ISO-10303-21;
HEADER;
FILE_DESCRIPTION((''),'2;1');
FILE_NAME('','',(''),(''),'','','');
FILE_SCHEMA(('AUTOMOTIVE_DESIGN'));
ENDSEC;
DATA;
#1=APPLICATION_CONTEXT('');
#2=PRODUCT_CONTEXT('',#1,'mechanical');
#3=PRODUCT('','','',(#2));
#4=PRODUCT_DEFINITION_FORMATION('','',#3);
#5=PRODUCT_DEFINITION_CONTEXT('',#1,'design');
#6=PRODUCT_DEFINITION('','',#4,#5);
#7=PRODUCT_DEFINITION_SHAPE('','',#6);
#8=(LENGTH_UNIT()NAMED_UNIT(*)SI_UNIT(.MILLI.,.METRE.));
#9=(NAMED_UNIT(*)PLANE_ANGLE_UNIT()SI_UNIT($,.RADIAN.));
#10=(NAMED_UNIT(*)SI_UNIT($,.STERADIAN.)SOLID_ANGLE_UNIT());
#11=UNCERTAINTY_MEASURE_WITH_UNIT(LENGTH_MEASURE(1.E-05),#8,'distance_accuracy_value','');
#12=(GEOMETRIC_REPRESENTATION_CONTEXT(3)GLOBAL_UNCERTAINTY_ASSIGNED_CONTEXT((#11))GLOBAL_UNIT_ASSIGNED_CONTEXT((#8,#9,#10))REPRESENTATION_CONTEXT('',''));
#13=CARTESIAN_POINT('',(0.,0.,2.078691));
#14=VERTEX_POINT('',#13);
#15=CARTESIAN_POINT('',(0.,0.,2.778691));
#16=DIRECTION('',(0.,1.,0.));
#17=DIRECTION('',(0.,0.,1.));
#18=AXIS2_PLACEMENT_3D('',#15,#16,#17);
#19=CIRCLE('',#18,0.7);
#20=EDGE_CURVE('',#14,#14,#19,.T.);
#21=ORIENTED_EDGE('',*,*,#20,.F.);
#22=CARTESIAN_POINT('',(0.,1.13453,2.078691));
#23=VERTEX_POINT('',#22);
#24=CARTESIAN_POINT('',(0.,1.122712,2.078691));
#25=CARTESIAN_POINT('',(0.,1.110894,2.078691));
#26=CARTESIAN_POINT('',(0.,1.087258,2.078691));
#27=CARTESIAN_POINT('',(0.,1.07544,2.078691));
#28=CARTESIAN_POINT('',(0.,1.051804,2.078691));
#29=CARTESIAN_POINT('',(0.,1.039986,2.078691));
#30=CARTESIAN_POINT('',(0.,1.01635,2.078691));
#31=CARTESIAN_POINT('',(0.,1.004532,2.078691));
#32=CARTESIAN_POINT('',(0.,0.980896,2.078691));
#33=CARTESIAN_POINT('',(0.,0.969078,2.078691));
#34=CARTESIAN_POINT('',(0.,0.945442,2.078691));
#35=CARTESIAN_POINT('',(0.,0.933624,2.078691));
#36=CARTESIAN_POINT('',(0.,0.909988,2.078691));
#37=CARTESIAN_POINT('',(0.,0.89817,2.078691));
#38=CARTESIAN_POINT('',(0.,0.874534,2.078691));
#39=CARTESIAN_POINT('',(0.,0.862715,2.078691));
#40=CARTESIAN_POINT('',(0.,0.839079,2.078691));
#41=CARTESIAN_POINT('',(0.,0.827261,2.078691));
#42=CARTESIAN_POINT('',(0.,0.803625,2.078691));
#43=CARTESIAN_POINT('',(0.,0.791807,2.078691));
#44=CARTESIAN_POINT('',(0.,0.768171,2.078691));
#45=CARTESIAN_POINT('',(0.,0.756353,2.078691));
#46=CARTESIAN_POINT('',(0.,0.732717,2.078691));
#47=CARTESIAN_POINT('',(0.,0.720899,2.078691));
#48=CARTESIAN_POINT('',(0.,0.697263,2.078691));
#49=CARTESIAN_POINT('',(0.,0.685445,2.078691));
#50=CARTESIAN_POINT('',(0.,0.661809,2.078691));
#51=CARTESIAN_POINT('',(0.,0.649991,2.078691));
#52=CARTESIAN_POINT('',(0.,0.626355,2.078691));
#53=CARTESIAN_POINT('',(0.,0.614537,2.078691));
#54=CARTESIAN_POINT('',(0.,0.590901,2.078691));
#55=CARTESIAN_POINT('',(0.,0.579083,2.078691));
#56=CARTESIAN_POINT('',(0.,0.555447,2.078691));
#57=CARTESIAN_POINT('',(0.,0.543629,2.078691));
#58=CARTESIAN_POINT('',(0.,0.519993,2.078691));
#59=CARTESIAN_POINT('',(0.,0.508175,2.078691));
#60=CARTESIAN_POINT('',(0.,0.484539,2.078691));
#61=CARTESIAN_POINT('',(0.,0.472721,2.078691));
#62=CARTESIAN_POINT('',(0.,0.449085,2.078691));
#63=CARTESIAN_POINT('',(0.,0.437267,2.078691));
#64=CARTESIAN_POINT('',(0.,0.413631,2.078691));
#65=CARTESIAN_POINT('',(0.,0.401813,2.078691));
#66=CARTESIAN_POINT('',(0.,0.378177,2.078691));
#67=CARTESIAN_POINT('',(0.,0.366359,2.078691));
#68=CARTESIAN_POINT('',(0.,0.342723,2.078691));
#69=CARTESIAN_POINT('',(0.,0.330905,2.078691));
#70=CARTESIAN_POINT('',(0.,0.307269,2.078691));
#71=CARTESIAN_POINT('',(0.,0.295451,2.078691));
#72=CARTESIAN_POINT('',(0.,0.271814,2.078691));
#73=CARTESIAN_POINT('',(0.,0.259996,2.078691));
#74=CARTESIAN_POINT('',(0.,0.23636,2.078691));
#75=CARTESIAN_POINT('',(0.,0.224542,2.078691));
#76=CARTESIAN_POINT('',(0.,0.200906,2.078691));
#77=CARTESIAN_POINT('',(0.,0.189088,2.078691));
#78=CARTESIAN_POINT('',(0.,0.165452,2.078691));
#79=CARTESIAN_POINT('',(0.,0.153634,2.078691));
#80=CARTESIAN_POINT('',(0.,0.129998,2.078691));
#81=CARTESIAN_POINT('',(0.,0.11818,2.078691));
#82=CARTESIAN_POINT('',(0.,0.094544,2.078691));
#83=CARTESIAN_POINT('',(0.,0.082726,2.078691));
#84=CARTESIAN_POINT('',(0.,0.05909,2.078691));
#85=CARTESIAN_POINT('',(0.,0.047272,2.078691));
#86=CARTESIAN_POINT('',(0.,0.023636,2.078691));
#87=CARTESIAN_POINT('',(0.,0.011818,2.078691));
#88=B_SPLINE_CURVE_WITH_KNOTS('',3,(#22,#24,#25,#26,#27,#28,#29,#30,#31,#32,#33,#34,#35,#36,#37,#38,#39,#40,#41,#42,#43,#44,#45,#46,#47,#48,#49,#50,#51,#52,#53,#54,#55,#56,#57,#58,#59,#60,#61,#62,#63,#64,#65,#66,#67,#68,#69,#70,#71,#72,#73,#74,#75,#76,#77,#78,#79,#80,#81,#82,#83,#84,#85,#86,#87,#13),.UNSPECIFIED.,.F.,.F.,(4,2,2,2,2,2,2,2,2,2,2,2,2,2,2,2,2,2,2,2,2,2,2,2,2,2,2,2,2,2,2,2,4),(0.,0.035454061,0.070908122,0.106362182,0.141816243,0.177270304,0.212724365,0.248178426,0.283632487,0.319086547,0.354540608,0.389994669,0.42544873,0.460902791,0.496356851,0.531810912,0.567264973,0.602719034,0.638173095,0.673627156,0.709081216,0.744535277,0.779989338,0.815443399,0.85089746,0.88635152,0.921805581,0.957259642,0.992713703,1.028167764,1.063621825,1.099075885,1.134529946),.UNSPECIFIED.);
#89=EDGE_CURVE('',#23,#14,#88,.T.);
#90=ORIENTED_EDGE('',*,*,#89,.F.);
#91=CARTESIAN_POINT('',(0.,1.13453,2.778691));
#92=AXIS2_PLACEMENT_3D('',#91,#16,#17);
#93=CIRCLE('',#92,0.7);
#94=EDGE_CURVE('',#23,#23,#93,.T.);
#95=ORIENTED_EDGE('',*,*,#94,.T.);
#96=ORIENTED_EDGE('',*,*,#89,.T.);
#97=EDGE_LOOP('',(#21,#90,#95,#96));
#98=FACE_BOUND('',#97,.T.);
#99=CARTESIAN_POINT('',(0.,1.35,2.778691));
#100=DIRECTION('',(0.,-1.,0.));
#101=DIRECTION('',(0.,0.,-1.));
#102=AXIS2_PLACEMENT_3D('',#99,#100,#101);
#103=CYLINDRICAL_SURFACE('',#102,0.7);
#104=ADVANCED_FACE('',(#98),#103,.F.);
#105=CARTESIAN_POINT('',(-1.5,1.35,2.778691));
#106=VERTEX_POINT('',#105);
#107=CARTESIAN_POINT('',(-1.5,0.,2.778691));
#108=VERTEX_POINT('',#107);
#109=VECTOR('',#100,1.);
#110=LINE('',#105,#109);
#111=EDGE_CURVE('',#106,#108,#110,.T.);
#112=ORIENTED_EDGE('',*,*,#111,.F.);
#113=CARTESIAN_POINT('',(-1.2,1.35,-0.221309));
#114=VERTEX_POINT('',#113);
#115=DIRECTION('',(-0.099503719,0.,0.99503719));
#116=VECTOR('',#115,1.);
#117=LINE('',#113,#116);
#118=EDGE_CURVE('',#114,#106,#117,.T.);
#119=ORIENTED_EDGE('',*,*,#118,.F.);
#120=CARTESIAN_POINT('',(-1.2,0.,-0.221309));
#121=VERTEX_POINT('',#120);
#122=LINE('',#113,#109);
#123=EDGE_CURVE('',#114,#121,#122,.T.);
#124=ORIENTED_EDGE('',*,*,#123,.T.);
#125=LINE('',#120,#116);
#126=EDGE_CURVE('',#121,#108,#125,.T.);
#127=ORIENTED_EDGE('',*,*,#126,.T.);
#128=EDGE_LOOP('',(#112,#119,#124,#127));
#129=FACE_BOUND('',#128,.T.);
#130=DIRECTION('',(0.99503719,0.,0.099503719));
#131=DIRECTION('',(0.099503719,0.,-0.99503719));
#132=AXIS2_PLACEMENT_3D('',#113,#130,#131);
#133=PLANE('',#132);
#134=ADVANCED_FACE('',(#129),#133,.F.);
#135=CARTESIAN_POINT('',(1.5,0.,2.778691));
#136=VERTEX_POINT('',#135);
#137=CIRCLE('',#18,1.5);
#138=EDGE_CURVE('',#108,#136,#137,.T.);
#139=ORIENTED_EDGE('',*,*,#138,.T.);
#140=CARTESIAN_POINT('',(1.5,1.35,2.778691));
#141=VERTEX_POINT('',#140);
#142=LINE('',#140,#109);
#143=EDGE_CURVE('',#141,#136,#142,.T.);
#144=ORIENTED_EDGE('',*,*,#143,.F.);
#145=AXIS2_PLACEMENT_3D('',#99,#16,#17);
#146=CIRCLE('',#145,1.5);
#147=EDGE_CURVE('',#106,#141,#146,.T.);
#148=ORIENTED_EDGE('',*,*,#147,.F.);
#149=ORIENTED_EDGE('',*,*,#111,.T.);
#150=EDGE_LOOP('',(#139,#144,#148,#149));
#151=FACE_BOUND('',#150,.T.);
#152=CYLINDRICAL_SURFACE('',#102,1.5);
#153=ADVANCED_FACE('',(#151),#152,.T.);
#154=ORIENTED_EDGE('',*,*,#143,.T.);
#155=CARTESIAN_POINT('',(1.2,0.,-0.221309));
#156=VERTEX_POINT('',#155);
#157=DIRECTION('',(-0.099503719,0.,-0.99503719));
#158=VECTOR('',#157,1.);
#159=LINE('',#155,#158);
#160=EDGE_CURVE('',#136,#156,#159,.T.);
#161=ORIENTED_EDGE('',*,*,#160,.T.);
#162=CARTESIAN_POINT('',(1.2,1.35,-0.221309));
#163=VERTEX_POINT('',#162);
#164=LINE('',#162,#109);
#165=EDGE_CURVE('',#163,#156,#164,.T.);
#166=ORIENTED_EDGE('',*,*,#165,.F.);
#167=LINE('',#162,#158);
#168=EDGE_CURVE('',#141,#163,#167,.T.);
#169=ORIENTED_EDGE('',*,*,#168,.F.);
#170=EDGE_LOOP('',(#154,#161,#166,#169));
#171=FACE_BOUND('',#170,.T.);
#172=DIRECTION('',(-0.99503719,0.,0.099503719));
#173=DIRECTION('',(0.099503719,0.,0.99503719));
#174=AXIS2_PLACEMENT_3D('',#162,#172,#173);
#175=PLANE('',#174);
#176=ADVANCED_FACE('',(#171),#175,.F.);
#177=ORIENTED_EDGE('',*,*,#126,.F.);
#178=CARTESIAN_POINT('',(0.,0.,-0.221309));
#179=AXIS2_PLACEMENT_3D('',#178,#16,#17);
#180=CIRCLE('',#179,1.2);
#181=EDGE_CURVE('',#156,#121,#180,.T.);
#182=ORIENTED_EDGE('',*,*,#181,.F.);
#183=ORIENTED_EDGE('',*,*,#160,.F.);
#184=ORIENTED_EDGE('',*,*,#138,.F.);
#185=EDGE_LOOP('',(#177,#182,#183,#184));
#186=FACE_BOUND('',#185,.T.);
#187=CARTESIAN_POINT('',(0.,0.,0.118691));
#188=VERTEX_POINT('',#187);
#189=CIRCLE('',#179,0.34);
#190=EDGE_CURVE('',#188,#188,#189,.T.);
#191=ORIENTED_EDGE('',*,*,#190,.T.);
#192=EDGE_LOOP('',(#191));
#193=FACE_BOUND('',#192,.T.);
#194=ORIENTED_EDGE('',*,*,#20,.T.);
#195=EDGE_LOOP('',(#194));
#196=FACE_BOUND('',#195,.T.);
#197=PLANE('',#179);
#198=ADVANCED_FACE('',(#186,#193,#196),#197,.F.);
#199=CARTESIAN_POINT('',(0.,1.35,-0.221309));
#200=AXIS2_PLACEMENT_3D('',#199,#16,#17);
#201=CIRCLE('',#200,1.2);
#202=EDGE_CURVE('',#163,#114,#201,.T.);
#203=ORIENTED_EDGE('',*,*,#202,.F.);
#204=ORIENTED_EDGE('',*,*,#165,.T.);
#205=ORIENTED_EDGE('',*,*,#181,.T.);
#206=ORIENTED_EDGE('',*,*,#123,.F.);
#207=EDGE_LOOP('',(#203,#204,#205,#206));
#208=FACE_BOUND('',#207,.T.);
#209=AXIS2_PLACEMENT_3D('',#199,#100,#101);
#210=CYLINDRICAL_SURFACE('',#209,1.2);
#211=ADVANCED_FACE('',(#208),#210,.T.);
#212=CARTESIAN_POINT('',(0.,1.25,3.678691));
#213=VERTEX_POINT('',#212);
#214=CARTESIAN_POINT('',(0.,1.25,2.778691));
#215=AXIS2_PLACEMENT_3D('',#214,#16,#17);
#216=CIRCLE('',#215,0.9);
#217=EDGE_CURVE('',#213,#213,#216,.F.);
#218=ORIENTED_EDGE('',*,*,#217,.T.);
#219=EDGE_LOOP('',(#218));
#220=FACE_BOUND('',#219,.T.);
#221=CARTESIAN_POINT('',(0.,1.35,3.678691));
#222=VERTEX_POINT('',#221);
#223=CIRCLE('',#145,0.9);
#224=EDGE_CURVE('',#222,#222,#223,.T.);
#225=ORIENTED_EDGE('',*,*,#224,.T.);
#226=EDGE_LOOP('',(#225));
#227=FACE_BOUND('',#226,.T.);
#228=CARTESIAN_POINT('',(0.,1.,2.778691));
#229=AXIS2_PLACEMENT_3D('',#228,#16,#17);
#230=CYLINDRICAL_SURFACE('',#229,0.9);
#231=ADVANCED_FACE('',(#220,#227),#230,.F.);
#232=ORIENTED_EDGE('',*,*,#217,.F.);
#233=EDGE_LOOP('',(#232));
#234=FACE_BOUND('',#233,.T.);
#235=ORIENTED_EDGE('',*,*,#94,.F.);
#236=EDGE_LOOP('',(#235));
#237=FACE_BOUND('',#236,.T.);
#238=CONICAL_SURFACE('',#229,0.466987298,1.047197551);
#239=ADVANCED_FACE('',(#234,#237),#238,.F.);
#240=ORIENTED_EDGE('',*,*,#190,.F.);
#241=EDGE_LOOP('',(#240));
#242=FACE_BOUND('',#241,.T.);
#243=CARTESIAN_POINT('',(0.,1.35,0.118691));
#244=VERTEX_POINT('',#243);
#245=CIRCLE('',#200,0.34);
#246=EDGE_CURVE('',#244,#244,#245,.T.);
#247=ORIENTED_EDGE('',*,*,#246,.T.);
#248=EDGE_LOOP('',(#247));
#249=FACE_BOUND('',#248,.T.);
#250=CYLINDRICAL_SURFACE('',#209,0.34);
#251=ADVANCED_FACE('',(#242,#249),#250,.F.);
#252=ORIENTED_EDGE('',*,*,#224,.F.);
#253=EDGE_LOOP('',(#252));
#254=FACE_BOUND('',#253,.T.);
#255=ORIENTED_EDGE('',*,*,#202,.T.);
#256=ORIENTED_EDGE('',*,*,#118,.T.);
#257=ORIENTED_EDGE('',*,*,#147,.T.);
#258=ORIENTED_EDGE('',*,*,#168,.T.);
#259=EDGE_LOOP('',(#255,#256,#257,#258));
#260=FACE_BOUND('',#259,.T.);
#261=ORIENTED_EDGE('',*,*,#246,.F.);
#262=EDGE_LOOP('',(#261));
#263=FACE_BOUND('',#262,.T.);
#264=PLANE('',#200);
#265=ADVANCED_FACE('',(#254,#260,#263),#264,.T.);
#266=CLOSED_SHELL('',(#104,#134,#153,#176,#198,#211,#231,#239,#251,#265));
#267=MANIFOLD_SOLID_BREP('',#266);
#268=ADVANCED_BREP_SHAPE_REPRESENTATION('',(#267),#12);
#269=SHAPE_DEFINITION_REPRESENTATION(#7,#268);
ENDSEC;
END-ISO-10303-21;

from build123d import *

# Parameters (mm, degrees)
SKETCH1_R           = 0.7
SKETCH1_R_2         = 0.34
BOSS_EXTRUDE1_DEPTH = 1.35
SKETCH2_R           = 0.9
CUT_EXTRUDE3_DEPTH  = 0.35
CHAMFER1_SIZE       = 0.25
CHAMFER1_SIZE_2     = 0.433012702


with BuildPart() as part:
    # Sketch1 → Boss-Extrude1 (new body)
    with BuildSketch(Plane(origin=(0, 0, 0), x_dir=(1, 0, 0), z_dir=(0, 1, 0))):
        with BuildLine():
            Line((-1.2, 0.221308643), (-1.5, -2.778691357))
            ThreePointArc((-1.5, -2.778691357), (0, -4.278691357), (1.5, -2.778691357))
            Line((1.5, -2.778691357), (1.2, 0.221308643))
            ThreePointArc((1.2, 0.221308643), (0, 1.421308643), (-1.2, 0.221308643))
        make_face()
        with Locations(Location((0, -2.778691357, 0), (0, 0, 90))):
            Circle(SKETCH1_R, mode=Mode.SUBTRACT)
        with Locations(Location((0, 0.221308643, 0), (0, 0, 270))):
            Circle(SKETCH1_R_2, mode=Mode.SUBTRACT)
    extrude(amount=BOSS_EXTRUDE1_DEPTH)

    # Sketch2 → Cut-Extrude3 (cut)
    with BuildSketch(Plane(origin=(0, 1.35, 0), x_dir=(1, 0, 0), z_dir=(0, 1, 0))):
        with Locations(Location((0, -2.778691357, 0), (0, 0, 270))):
            Circle(SKETCH2_R)
    extrude(amount=-CUT_EXTRUDE3_DEPTH, mode=Mode.SUBTRACT)

    # Chamfer1
    # the kernel refuses this chamfer: 0.433012702, 0.25 mm, written as the material it adds along each edge
    with BuildSketch(Plane(origin=(0, 1, 2.778691357), x_dir=(0, 0, 1), z_dir=(-1, 0, 0))) as chamfer1_piece_1_section:
        Polygon((0.9, CHAMFER1_SIZE), (0.9 - CHAMFER1_SIZE_2, 0), (0.9, 0), align=None)
    chamfer1_piece_1 = revolve(axis=Axis((0, 1, 2.778691357), (0, 1, 0)), mode=Mode.PRIVATE)
    chamfer1_piece_1 = chamfer1_piece_1 - Plane(origin=(0, 1.191367734, 2.778691357), x_dir=(0, 0, -1), z_dir=(0, -1, 0)) * Cylinder(0.7, 4, mode=Mode.PRIVATE)
    add(chamfer1_piece_1)


solid = part.part
